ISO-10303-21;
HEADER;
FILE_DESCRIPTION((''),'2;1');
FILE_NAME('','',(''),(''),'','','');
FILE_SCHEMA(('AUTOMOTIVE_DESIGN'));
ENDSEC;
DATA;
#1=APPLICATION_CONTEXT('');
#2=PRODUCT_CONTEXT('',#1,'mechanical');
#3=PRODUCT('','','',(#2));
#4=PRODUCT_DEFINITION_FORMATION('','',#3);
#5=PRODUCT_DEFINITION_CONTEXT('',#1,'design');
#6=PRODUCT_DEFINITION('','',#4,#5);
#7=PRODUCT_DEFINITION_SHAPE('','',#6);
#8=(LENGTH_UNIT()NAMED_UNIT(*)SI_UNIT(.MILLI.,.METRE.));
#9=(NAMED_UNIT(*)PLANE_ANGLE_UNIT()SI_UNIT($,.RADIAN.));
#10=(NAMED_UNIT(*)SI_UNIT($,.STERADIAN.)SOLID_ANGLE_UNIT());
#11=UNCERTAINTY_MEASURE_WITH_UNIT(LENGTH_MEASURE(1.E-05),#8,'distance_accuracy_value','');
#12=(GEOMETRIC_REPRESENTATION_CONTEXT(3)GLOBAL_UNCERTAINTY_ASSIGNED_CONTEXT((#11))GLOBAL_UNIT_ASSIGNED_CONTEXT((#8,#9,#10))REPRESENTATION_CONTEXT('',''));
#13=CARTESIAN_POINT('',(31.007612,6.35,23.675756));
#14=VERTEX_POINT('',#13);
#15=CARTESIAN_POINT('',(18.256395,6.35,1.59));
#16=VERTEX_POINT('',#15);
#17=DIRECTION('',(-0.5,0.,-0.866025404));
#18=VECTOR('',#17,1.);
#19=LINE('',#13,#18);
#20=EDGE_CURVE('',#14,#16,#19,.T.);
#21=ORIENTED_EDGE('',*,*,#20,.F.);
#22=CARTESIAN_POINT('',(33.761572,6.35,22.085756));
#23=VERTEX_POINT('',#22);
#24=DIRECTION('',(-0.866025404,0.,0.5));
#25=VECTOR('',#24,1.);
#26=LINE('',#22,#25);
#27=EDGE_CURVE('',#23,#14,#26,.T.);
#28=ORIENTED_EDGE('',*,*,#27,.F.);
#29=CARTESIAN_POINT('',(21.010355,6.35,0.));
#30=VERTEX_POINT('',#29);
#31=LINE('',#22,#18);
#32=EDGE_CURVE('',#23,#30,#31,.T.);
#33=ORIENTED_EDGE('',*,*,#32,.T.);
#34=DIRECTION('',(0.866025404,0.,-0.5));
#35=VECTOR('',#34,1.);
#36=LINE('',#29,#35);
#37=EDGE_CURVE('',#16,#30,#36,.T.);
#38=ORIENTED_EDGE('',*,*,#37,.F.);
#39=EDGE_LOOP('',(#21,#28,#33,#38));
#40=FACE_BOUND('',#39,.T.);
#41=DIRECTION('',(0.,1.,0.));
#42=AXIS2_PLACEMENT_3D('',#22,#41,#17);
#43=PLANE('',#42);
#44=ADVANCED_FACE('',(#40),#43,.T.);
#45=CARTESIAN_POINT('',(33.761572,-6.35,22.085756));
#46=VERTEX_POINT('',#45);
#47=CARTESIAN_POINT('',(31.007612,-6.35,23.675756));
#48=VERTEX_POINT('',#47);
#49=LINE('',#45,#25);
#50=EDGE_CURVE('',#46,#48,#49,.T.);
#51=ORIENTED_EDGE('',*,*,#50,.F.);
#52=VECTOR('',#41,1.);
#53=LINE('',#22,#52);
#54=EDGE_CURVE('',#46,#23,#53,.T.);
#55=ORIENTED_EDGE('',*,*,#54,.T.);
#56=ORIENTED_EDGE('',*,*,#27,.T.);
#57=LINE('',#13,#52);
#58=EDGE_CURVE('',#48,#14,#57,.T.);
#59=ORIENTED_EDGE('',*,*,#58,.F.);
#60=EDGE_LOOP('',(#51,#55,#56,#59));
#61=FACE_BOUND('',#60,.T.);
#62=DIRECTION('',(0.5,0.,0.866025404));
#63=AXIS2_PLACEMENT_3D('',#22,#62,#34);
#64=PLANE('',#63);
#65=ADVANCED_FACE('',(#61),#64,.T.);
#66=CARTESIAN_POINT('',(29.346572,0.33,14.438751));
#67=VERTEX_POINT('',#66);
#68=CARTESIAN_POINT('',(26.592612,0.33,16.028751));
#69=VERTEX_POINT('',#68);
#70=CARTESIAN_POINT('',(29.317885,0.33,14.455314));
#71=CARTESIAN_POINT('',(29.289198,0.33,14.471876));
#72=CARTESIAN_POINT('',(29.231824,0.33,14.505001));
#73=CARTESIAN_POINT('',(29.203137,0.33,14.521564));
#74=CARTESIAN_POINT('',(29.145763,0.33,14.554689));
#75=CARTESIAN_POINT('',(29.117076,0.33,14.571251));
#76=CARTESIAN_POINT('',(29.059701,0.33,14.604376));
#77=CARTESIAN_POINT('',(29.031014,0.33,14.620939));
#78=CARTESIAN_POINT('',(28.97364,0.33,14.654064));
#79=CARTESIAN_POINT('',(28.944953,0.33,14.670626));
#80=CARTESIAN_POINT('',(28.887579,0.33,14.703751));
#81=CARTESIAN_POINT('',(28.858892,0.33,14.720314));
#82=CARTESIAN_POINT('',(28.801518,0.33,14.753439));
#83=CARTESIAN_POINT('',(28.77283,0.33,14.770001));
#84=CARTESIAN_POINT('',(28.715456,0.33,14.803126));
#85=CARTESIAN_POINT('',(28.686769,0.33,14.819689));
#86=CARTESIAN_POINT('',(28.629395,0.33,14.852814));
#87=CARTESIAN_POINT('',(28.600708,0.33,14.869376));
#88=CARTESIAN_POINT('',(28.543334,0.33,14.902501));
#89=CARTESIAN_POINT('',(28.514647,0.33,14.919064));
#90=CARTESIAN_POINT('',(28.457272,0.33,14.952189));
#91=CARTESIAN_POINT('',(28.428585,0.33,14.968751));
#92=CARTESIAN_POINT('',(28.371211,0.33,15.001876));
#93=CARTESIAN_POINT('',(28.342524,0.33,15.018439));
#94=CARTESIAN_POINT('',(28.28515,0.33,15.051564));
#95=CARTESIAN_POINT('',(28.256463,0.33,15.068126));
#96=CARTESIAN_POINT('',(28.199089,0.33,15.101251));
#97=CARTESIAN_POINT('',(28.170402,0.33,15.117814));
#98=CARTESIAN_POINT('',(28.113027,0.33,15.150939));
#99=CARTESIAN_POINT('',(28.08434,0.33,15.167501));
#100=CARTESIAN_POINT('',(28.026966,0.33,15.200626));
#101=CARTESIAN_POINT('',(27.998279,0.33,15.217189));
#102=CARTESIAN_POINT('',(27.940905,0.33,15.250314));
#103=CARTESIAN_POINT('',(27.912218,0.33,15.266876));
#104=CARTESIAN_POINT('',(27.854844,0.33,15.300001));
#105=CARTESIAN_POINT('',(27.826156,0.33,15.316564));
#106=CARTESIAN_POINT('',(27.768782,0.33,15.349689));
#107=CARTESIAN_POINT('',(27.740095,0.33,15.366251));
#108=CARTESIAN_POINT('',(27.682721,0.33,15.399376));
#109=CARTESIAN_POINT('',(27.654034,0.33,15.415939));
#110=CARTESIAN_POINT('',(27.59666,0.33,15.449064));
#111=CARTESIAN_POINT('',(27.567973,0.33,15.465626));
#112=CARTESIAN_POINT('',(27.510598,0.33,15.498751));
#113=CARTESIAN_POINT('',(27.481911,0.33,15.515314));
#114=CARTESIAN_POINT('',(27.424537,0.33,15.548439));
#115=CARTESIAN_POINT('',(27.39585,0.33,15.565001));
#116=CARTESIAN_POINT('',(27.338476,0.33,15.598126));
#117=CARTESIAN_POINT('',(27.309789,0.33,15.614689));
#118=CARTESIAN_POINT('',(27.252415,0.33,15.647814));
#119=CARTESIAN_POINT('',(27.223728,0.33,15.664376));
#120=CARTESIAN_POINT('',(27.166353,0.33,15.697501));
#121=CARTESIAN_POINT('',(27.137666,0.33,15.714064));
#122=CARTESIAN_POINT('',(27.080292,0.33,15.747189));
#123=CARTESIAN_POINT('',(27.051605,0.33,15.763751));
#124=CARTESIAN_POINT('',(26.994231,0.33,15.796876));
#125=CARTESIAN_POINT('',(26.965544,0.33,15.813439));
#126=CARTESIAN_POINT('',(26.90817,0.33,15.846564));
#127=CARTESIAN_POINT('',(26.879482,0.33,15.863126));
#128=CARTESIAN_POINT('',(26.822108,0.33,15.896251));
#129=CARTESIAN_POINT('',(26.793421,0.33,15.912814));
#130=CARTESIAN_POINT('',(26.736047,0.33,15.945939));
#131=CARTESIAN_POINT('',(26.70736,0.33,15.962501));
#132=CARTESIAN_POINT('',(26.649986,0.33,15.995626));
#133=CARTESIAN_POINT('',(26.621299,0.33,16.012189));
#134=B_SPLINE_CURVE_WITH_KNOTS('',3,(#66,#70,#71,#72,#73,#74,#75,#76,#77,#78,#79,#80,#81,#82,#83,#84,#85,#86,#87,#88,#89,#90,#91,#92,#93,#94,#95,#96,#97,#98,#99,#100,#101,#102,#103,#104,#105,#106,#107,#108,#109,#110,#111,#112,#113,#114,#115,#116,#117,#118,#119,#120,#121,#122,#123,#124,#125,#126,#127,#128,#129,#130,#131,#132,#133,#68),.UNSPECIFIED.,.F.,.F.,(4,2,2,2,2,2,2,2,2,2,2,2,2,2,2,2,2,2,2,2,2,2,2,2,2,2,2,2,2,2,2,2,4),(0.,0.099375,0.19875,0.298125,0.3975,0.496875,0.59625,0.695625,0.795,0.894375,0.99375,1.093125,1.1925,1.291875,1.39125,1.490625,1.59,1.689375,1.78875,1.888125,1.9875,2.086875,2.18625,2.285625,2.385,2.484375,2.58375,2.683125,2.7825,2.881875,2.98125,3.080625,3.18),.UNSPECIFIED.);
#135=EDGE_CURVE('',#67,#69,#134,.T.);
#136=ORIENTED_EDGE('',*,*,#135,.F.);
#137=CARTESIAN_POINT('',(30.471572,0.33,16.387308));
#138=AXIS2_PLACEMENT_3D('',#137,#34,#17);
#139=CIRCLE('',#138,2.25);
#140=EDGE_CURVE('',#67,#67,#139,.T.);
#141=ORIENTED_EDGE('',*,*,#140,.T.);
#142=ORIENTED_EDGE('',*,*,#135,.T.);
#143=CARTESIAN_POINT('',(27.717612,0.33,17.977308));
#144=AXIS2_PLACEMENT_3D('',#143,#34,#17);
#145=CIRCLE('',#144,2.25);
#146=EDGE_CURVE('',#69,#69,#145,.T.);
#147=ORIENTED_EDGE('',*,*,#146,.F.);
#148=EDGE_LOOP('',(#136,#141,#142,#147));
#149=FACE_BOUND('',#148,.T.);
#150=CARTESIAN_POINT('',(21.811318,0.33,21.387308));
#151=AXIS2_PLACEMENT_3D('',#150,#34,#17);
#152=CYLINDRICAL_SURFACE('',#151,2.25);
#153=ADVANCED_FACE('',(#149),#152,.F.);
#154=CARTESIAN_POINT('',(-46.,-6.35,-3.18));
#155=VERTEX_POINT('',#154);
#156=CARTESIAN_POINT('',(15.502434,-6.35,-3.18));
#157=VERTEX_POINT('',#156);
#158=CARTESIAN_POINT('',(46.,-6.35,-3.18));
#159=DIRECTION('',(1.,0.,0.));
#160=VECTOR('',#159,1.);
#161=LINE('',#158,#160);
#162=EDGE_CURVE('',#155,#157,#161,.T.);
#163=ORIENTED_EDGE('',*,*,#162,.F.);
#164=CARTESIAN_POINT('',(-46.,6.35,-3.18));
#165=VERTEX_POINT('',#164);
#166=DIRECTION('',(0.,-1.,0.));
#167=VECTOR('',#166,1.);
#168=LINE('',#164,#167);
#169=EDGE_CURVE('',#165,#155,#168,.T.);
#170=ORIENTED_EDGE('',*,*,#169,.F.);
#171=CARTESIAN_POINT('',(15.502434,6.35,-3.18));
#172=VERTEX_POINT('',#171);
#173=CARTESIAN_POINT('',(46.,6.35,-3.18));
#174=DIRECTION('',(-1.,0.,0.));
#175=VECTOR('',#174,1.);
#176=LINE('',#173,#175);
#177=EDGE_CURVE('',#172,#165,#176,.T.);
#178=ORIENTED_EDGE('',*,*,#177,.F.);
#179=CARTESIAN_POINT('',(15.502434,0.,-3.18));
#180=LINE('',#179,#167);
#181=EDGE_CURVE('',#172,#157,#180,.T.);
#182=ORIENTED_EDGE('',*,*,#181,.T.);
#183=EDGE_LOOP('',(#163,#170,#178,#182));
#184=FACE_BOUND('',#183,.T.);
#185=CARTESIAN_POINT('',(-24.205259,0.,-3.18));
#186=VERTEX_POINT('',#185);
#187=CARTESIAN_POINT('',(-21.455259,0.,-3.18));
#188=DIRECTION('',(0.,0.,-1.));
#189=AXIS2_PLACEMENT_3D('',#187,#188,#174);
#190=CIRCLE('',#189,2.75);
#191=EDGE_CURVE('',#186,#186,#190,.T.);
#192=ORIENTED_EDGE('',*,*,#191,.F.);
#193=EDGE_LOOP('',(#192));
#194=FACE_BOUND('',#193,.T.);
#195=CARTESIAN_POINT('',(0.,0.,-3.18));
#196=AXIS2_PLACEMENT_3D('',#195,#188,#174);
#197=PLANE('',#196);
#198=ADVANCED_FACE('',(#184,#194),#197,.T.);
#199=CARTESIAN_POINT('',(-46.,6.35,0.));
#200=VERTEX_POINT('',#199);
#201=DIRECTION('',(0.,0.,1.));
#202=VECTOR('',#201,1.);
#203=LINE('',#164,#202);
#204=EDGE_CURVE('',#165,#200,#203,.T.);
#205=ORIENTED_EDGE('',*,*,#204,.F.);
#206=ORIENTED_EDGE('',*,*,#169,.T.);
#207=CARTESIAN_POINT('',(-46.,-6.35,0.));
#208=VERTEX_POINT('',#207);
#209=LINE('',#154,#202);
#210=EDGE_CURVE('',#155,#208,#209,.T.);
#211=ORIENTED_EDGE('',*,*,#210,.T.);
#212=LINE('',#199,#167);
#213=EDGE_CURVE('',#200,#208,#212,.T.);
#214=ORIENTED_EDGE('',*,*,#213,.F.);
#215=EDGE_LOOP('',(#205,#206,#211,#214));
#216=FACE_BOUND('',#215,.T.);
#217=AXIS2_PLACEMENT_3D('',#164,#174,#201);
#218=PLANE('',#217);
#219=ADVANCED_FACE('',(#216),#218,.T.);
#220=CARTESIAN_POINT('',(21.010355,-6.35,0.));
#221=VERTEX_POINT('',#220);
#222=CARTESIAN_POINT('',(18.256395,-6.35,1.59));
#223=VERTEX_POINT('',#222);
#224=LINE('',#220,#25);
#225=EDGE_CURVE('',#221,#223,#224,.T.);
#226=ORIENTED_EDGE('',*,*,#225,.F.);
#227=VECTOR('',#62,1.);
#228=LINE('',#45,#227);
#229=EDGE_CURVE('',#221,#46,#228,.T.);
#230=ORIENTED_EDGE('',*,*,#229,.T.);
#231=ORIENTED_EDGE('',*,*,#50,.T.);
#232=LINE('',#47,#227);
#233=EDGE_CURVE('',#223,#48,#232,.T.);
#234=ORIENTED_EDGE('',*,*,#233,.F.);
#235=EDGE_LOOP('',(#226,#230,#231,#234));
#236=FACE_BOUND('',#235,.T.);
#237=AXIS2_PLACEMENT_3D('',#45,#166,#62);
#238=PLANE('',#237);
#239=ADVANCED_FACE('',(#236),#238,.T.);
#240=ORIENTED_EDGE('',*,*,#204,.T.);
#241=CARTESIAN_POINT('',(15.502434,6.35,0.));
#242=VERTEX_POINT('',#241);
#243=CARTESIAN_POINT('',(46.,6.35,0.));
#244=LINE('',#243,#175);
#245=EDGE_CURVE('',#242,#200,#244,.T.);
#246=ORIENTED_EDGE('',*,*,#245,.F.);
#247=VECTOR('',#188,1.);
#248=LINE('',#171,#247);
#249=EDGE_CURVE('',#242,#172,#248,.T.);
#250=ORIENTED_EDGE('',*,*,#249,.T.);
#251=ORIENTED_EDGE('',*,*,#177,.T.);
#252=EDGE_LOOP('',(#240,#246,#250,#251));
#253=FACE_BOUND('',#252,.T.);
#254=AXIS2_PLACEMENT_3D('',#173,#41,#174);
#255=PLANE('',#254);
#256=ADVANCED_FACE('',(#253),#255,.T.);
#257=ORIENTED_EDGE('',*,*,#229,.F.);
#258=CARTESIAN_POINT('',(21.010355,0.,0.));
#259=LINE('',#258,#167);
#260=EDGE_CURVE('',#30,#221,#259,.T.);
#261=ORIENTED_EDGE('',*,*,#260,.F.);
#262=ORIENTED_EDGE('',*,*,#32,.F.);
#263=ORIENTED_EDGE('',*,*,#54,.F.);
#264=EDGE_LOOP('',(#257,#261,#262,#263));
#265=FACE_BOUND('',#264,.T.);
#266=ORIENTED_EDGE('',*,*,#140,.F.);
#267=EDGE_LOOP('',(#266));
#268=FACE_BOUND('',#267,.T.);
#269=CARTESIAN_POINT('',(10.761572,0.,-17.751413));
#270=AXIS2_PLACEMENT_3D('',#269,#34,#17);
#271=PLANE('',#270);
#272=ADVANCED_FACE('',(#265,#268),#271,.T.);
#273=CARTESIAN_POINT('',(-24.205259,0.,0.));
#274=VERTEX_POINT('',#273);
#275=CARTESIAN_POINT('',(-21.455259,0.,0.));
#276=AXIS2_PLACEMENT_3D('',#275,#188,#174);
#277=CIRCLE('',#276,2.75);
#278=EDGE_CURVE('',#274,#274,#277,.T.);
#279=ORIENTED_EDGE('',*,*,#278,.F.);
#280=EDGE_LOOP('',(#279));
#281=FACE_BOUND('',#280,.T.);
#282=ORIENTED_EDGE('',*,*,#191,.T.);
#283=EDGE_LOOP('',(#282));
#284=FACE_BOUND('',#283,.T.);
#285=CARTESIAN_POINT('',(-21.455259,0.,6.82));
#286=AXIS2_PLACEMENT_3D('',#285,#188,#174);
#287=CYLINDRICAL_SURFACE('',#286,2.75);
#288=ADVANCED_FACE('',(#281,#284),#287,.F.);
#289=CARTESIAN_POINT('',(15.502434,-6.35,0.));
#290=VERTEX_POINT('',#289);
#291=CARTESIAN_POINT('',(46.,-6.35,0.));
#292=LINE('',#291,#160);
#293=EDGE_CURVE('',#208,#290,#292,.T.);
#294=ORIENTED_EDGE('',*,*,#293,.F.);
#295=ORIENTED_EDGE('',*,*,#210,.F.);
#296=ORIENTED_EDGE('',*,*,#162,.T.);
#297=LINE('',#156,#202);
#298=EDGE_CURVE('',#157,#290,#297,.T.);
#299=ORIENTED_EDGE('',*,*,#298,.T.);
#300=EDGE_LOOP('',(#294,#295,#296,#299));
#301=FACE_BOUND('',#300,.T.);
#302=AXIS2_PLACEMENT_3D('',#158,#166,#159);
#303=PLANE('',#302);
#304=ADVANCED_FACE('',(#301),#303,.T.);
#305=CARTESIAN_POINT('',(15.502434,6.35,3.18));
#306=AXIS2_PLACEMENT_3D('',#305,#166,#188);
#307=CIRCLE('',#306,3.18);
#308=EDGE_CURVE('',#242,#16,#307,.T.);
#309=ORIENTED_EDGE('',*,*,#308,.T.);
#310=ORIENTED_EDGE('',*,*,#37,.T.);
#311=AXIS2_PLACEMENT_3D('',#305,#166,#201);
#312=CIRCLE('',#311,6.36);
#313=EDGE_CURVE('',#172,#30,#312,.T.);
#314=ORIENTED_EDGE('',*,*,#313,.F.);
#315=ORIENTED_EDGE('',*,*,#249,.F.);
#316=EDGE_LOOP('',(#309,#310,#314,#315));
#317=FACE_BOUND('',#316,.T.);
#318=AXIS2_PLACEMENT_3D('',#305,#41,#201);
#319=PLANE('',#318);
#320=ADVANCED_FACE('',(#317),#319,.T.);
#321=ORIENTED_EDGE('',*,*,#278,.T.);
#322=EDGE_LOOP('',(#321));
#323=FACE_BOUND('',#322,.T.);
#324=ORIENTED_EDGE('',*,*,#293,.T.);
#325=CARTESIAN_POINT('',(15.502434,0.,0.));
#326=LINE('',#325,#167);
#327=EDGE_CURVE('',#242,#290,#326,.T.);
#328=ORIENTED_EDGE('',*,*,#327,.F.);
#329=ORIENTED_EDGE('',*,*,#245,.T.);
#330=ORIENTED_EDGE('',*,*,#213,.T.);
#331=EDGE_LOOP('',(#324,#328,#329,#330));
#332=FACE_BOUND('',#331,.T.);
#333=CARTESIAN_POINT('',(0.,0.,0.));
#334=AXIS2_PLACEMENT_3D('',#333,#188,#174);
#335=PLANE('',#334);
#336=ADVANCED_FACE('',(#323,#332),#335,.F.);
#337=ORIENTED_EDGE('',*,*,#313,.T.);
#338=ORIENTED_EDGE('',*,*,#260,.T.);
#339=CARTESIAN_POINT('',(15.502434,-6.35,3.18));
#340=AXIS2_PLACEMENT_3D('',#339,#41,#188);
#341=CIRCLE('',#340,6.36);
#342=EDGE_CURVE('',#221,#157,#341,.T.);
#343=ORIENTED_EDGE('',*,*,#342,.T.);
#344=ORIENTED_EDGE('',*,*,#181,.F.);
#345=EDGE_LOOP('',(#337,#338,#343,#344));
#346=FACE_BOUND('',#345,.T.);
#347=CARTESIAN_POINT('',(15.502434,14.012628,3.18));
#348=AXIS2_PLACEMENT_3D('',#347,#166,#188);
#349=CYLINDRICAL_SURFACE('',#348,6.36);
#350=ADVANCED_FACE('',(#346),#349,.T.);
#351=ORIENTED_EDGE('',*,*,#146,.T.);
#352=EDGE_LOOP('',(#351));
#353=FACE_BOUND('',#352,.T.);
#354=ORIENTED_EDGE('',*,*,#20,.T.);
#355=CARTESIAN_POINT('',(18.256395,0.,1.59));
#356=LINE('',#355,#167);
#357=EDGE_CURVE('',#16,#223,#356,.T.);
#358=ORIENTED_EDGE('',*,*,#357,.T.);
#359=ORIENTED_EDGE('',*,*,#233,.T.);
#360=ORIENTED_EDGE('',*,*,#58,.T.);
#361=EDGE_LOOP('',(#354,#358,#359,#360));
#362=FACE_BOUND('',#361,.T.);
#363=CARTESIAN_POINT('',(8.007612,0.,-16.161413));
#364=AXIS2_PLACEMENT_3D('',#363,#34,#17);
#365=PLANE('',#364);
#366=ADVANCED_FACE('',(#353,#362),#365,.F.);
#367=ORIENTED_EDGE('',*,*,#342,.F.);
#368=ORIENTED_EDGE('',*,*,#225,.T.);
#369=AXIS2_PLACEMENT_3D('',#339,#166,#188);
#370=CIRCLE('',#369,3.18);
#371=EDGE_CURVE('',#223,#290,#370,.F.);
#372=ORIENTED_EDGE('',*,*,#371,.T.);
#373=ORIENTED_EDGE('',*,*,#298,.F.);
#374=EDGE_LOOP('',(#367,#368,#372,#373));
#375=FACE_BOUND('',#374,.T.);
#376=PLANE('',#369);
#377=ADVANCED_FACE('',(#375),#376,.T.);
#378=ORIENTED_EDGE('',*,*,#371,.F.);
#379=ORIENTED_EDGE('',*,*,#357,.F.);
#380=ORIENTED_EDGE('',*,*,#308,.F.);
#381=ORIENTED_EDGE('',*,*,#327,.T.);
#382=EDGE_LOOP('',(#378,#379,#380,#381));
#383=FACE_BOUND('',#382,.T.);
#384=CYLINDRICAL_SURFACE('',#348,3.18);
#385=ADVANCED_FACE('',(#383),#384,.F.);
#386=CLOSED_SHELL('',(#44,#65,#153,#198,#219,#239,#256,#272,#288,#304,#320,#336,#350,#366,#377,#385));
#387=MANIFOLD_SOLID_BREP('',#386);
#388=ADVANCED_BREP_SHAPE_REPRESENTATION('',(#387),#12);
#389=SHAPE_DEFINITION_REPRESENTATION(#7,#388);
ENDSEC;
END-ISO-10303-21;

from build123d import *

# Parameters (mm, degrees)
ESBO_O1_W               = 92
ESBO_O1_H               = 12.7
FLANGE_BASE1_DEPTH      = 3.18
DOBRA_START             = -6.35
DOBRA_ESBO_ADA1_DEPTH   = 12.7
DOBRA_ESBO_ADA1_2_DEPTH = 12.7
ESBO_O8_R               = 2.75
CORTE_EXTRUS_O1_DEPTH   = 10
ESBO_O10_R              = 2.25
CORTE_EXTRUS_O3_DEPTH   = 10


# Read off the part's stored shape, not the designer's step: Dobra esboçada1
# Sheet-metal steps are written as plain solids
with BuildPart() as part:
    # Esboço1 → Flange-base1 (new body)
    with BuildSketch(Plane.XY):
        Rectangle(ESBO_O1_W, ESBO_O1_H)
    extrude(amount=-FLANGE_BASE1_DEPTH)

    # Dobra esboçada1 outline → Dobra esboçada1 (cut)
    with BuildSketch(Plane(origin=(0, 0, 0), x_dir=(1, 0, 0), z_dir=(0, 1, 0)).offset(DOBRA_START)):
        with BuildLine():
            ThreePointArc((15.50243384, 3.18), (18.68243384, 2.327921568), (21.010355408, 0))
            Line((21.010355408, 0), (46, 0))
            Line((46, 0), (46, 3.18))
            Line((46, 3.18), (15.50243384, 3.18))
        make_face()
    extrude(amount=DOBRA_ESBO_ADA1_DEPTH, mode=Mode.SUBTRACT)

    # Dobra esbo_ada1 2 outline → Dobra esbo_ada1 2 (add)
    with BuildSketch(Plane(origin=(0, 0, 0), x_dir=(1, 0, 0), z_dir=(0, 1, 0)).offset(DOBRA_START)):
        with BuildLine():
            Line((18.256394624, -1.59), (31.007611545, -23.675755564))
            Line((31.007611545, -23.675755564), (33.761572329, -22.085755564))
            Line((33.761572329, -22.085755564), (21.010355408, 0))
            Line((21.010355408, 0), (15.50243384, 0))
            ThreePointArc((15.50243384, 0), (17.09243384, -0.426039216), (18.256394624, -1.59))
        make_face()
    extrude(amount=DOBRA_ESBO_ADA1_2_DEPTH)

    # Esboço8 → Corte-extrusão1 (cut)
    with BuildSketch(Plane(origin=(0, 0, -3.18), x_dir=(-1, 0, 0), z_dir=(0, 0, -1))):
        with Locations((21.455259123, 0)):
            Circle(ESBO_O8_R)
    extrude(amount=-CORTE_EXTRUS_O1_DEPTH, mode=Mode.SUBTRACT)

    # Esboço10 → Corte-extrusão3 (cut)
    with BuildSketch(Plane(origin=(15.757766556, 0, -9.097750763), x_dir=(-0.49999999999999806, 0, -0.8660254037844398), z_dir=(0.8660254037844397, 0, -0.499999999999998))):
        with Locations((-29.427611545, 0.33)):
            Circle(ESBO_O10_R)
    extrude(amount=-CORTE_EXTRUS_O3_DEPTH, mode=Mode.SUBTRACT)


solid = part.part
